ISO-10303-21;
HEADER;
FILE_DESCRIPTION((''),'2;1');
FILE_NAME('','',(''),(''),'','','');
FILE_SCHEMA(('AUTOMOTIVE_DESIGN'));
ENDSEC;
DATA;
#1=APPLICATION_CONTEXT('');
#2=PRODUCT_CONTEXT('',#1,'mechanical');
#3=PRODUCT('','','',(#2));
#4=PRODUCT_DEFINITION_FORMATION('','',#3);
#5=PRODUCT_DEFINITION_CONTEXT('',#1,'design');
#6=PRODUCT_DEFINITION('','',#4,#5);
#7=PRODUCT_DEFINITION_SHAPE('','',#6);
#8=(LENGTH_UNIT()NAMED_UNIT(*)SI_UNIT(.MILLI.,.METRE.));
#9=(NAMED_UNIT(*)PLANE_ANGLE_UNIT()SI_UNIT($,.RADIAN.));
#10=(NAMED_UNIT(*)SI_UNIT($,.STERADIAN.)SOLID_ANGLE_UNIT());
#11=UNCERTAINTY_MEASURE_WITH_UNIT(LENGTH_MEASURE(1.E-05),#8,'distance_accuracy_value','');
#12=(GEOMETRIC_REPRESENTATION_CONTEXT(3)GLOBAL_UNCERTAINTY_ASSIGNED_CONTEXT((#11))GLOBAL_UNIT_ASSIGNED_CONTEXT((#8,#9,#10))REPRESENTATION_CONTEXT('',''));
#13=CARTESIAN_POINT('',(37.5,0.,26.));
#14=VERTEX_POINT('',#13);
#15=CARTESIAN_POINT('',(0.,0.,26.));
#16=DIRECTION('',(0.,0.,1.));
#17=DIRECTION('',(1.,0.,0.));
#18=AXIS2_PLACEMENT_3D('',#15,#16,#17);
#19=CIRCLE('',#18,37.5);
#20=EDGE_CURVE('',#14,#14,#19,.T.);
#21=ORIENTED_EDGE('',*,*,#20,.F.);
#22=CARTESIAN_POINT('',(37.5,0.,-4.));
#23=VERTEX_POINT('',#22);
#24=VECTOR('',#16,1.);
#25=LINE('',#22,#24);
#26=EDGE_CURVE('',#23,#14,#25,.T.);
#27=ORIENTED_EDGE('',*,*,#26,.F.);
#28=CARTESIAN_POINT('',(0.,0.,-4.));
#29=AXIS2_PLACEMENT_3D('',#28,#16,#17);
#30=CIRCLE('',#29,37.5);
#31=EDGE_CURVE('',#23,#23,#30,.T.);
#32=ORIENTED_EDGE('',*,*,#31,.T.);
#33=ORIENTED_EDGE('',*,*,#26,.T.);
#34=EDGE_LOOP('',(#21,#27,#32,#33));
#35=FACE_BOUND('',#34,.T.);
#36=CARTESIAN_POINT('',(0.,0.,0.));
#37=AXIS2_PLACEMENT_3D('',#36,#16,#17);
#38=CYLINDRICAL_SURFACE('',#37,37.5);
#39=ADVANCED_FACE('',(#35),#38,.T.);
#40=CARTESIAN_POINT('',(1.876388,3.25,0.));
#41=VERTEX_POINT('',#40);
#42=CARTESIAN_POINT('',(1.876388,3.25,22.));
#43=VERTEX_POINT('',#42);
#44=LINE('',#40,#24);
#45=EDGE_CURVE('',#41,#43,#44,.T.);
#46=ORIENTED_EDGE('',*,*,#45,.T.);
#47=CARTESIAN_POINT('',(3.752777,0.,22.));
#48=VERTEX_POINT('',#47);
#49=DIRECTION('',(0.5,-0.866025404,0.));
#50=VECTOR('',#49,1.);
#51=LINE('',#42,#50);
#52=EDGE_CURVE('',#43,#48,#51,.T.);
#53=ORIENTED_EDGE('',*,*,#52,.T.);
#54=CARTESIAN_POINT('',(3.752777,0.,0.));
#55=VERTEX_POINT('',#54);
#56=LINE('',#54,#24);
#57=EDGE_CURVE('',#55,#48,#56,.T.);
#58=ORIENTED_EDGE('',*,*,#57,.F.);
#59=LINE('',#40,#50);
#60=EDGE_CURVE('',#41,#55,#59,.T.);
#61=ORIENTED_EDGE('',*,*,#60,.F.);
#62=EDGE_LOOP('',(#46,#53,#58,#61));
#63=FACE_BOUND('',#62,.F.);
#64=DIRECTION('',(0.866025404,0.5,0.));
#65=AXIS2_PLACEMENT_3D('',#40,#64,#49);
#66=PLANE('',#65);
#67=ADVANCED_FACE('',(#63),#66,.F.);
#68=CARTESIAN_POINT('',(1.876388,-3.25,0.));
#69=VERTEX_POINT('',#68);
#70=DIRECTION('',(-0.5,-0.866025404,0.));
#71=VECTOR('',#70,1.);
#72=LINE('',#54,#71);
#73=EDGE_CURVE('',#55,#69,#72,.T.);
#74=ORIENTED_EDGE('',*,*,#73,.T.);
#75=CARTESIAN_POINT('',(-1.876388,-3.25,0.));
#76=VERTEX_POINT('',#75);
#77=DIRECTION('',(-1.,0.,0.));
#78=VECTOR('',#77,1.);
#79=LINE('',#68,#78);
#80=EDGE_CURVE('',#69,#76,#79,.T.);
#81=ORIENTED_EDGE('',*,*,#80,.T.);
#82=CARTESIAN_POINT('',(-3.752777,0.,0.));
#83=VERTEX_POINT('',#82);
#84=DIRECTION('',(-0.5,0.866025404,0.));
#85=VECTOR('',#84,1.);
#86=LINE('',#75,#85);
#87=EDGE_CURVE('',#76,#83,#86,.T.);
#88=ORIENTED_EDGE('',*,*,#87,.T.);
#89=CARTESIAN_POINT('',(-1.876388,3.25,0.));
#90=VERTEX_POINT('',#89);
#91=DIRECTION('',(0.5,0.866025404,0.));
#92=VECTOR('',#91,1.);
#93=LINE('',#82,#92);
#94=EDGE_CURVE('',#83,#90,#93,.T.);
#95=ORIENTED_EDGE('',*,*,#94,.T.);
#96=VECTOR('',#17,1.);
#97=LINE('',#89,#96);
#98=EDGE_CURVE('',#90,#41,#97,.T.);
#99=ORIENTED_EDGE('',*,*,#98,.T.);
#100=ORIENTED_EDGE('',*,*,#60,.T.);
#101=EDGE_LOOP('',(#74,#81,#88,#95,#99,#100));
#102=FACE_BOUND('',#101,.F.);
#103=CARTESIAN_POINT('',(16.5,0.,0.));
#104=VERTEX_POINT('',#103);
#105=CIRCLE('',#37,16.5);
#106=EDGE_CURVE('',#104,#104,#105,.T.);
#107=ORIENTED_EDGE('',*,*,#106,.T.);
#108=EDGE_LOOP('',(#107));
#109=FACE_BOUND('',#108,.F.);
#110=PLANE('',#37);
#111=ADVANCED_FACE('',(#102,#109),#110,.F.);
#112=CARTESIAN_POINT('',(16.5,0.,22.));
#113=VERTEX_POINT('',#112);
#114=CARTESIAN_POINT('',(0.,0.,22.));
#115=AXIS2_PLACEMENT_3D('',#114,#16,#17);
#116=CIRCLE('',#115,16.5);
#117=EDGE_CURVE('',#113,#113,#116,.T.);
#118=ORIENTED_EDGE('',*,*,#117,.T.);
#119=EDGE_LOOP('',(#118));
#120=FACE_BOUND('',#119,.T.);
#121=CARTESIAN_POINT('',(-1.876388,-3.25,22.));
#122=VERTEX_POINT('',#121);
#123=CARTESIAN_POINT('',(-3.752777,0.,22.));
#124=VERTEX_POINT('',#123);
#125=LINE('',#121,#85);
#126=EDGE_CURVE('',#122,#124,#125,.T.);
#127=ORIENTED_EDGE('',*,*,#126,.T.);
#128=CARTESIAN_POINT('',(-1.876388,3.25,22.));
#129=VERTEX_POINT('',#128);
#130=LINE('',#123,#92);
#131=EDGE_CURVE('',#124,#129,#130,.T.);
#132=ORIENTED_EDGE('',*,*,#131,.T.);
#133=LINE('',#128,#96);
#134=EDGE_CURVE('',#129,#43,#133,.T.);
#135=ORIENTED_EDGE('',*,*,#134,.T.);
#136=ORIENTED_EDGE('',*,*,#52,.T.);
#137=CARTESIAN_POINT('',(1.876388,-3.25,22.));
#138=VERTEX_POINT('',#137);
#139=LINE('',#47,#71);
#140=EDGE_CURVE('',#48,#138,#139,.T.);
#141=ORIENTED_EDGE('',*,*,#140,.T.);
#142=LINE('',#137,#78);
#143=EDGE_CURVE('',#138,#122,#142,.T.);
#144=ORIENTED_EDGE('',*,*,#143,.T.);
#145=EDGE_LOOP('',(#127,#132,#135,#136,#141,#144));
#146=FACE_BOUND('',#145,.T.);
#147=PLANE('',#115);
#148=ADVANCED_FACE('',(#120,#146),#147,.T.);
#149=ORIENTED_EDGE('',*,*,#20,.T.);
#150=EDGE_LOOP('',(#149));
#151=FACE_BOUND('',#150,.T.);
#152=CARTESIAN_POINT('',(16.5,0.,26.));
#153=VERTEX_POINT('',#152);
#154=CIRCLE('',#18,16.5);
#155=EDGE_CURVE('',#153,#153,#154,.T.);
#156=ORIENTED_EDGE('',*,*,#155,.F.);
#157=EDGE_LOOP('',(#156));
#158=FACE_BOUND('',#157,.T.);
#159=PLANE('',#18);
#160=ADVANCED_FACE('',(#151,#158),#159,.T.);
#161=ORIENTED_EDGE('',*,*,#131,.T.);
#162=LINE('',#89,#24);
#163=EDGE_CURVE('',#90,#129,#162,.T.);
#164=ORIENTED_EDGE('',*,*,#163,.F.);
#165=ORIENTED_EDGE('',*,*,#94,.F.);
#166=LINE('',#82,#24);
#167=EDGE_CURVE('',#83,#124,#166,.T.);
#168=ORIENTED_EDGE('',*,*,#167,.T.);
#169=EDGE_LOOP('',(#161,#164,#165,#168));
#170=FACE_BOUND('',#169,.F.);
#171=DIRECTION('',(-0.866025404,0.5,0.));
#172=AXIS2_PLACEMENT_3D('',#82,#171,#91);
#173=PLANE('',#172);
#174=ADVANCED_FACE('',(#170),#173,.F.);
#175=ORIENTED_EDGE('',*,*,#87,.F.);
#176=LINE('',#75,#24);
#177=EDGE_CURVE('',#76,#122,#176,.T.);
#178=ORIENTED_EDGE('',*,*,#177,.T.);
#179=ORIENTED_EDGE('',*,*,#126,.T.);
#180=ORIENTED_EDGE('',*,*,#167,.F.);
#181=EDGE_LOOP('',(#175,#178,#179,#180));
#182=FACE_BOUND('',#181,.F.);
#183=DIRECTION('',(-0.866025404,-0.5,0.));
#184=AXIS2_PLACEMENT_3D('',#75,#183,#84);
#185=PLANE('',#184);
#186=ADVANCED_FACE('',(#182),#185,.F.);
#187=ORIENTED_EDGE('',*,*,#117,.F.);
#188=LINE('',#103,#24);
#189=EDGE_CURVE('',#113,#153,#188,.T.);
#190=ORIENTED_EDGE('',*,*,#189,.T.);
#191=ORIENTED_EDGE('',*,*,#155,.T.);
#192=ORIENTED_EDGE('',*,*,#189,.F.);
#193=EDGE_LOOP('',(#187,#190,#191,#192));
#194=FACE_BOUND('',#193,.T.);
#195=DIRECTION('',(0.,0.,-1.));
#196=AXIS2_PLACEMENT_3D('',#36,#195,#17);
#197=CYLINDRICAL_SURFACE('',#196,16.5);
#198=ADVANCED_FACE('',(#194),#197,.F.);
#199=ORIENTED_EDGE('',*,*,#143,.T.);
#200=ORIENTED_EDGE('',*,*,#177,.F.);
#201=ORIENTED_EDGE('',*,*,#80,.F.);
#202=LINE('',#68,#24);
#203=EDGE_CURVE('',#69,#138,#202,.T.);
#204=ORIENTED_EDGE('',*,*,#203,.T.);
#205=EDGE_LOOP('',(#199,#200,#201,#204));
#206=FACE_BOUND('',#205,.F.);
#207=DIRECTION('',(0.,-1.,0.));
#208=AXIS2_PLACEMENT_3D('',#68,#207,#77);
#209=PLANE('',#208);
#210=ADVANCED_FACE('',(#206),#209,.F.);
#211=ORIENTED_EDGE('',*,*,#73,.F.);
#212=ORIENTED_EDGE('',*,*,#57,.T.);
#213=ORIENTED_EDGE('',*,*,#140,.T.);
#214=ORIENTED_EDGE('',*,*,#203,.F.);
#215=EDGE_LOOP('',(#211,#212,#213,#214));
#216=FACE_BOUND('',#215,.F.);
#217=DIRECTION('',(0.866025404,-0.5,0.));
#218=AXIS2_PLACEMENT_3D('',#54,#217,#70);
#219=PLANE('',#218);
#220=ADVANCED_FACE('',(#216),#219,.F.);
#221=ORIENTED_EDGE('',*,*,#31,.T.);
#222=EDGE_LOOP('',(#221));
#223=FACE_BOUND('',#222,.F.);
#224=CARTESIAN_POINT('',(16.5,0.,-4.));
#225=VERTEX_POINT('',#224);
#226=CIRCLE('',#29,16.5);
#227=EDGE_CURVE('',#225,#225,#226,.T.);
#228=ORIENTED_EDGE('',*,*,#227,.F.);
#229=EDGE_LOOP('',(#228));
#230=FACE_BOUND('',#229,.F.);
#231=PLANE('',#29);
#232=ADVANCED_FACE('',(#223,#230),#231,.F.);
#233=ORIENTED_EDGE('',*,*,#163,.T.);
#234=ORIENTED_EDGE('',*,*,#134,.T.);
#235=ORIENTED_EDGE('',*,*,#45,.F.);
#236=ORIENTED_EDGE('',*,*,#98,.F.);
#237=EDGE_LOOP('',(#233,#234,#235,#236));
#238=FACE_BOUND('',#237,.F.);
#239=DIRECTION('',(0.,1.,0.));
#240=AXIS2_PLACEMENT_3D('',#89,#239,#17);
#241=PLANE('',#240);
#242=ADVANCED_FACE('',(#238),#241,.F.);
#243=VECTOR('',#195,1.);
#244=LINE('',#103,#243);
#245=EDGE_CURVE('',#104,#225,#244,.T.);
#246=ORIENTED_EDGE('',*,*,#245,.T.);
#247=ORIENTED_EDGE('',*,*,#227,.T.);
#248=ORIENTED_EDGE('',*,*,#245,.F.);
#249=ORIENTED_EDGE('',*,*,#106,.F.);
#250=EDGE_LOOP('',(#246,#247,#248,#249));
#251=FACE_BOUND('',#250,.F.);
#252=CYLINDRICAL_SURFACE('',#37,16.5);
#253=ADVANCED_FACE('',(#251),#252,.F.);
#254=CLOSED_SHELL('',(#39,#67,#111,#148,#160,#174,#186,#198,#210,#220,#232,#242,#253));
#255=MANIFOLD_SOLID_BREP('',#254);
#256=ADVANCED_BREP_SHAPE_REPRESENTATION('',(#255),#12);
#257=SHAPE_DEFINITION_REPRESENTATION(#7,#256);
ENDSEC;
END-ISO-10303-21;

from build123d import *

# Parameters (mm, degrees)
F0_R     = 16.5
F1_DEPTH = 22
F0_R_2   = 37.5
F2_DEPTH = 26
F3_DEPTH = 4


# Not quite as in the source:
# - a feature names something its author has since deleted; it is built from what else it names


with BuildPart() as f1:
    # F0 (on Top) → F1 (new body)
    with BuildSketch(Plane.XY):
        Circle(F0_R)
        Polygon((3.7527767497, 0), (1.8763883749, -3.25), (-1.8763883749, -3.25), (-3.7527767497, 0), (-1.8763883749, 3.25), (1.8763883749, 3.25), align=None, mode=Mode.SUBTRACT)
    extrude(amount=F1_DEPTH)

    # F0 (on Top) → F2 (join)
    with BuildSketch(Plane.XY):
        Circle(F0_R_2)
        Circle(F0_R, mode=Mode.SUBTRACT)
    extrude(amount=F2_DEPTH)

    # F0 (on Top) → F3 (join)
    with BuildSketch(Plane.XY):
        Circle(F0_R_2)
        Circle(F0_R, mode=Mode.SUBTRACT)
    extrude(amount=-F3_DEPTH)


solid = f1.part
